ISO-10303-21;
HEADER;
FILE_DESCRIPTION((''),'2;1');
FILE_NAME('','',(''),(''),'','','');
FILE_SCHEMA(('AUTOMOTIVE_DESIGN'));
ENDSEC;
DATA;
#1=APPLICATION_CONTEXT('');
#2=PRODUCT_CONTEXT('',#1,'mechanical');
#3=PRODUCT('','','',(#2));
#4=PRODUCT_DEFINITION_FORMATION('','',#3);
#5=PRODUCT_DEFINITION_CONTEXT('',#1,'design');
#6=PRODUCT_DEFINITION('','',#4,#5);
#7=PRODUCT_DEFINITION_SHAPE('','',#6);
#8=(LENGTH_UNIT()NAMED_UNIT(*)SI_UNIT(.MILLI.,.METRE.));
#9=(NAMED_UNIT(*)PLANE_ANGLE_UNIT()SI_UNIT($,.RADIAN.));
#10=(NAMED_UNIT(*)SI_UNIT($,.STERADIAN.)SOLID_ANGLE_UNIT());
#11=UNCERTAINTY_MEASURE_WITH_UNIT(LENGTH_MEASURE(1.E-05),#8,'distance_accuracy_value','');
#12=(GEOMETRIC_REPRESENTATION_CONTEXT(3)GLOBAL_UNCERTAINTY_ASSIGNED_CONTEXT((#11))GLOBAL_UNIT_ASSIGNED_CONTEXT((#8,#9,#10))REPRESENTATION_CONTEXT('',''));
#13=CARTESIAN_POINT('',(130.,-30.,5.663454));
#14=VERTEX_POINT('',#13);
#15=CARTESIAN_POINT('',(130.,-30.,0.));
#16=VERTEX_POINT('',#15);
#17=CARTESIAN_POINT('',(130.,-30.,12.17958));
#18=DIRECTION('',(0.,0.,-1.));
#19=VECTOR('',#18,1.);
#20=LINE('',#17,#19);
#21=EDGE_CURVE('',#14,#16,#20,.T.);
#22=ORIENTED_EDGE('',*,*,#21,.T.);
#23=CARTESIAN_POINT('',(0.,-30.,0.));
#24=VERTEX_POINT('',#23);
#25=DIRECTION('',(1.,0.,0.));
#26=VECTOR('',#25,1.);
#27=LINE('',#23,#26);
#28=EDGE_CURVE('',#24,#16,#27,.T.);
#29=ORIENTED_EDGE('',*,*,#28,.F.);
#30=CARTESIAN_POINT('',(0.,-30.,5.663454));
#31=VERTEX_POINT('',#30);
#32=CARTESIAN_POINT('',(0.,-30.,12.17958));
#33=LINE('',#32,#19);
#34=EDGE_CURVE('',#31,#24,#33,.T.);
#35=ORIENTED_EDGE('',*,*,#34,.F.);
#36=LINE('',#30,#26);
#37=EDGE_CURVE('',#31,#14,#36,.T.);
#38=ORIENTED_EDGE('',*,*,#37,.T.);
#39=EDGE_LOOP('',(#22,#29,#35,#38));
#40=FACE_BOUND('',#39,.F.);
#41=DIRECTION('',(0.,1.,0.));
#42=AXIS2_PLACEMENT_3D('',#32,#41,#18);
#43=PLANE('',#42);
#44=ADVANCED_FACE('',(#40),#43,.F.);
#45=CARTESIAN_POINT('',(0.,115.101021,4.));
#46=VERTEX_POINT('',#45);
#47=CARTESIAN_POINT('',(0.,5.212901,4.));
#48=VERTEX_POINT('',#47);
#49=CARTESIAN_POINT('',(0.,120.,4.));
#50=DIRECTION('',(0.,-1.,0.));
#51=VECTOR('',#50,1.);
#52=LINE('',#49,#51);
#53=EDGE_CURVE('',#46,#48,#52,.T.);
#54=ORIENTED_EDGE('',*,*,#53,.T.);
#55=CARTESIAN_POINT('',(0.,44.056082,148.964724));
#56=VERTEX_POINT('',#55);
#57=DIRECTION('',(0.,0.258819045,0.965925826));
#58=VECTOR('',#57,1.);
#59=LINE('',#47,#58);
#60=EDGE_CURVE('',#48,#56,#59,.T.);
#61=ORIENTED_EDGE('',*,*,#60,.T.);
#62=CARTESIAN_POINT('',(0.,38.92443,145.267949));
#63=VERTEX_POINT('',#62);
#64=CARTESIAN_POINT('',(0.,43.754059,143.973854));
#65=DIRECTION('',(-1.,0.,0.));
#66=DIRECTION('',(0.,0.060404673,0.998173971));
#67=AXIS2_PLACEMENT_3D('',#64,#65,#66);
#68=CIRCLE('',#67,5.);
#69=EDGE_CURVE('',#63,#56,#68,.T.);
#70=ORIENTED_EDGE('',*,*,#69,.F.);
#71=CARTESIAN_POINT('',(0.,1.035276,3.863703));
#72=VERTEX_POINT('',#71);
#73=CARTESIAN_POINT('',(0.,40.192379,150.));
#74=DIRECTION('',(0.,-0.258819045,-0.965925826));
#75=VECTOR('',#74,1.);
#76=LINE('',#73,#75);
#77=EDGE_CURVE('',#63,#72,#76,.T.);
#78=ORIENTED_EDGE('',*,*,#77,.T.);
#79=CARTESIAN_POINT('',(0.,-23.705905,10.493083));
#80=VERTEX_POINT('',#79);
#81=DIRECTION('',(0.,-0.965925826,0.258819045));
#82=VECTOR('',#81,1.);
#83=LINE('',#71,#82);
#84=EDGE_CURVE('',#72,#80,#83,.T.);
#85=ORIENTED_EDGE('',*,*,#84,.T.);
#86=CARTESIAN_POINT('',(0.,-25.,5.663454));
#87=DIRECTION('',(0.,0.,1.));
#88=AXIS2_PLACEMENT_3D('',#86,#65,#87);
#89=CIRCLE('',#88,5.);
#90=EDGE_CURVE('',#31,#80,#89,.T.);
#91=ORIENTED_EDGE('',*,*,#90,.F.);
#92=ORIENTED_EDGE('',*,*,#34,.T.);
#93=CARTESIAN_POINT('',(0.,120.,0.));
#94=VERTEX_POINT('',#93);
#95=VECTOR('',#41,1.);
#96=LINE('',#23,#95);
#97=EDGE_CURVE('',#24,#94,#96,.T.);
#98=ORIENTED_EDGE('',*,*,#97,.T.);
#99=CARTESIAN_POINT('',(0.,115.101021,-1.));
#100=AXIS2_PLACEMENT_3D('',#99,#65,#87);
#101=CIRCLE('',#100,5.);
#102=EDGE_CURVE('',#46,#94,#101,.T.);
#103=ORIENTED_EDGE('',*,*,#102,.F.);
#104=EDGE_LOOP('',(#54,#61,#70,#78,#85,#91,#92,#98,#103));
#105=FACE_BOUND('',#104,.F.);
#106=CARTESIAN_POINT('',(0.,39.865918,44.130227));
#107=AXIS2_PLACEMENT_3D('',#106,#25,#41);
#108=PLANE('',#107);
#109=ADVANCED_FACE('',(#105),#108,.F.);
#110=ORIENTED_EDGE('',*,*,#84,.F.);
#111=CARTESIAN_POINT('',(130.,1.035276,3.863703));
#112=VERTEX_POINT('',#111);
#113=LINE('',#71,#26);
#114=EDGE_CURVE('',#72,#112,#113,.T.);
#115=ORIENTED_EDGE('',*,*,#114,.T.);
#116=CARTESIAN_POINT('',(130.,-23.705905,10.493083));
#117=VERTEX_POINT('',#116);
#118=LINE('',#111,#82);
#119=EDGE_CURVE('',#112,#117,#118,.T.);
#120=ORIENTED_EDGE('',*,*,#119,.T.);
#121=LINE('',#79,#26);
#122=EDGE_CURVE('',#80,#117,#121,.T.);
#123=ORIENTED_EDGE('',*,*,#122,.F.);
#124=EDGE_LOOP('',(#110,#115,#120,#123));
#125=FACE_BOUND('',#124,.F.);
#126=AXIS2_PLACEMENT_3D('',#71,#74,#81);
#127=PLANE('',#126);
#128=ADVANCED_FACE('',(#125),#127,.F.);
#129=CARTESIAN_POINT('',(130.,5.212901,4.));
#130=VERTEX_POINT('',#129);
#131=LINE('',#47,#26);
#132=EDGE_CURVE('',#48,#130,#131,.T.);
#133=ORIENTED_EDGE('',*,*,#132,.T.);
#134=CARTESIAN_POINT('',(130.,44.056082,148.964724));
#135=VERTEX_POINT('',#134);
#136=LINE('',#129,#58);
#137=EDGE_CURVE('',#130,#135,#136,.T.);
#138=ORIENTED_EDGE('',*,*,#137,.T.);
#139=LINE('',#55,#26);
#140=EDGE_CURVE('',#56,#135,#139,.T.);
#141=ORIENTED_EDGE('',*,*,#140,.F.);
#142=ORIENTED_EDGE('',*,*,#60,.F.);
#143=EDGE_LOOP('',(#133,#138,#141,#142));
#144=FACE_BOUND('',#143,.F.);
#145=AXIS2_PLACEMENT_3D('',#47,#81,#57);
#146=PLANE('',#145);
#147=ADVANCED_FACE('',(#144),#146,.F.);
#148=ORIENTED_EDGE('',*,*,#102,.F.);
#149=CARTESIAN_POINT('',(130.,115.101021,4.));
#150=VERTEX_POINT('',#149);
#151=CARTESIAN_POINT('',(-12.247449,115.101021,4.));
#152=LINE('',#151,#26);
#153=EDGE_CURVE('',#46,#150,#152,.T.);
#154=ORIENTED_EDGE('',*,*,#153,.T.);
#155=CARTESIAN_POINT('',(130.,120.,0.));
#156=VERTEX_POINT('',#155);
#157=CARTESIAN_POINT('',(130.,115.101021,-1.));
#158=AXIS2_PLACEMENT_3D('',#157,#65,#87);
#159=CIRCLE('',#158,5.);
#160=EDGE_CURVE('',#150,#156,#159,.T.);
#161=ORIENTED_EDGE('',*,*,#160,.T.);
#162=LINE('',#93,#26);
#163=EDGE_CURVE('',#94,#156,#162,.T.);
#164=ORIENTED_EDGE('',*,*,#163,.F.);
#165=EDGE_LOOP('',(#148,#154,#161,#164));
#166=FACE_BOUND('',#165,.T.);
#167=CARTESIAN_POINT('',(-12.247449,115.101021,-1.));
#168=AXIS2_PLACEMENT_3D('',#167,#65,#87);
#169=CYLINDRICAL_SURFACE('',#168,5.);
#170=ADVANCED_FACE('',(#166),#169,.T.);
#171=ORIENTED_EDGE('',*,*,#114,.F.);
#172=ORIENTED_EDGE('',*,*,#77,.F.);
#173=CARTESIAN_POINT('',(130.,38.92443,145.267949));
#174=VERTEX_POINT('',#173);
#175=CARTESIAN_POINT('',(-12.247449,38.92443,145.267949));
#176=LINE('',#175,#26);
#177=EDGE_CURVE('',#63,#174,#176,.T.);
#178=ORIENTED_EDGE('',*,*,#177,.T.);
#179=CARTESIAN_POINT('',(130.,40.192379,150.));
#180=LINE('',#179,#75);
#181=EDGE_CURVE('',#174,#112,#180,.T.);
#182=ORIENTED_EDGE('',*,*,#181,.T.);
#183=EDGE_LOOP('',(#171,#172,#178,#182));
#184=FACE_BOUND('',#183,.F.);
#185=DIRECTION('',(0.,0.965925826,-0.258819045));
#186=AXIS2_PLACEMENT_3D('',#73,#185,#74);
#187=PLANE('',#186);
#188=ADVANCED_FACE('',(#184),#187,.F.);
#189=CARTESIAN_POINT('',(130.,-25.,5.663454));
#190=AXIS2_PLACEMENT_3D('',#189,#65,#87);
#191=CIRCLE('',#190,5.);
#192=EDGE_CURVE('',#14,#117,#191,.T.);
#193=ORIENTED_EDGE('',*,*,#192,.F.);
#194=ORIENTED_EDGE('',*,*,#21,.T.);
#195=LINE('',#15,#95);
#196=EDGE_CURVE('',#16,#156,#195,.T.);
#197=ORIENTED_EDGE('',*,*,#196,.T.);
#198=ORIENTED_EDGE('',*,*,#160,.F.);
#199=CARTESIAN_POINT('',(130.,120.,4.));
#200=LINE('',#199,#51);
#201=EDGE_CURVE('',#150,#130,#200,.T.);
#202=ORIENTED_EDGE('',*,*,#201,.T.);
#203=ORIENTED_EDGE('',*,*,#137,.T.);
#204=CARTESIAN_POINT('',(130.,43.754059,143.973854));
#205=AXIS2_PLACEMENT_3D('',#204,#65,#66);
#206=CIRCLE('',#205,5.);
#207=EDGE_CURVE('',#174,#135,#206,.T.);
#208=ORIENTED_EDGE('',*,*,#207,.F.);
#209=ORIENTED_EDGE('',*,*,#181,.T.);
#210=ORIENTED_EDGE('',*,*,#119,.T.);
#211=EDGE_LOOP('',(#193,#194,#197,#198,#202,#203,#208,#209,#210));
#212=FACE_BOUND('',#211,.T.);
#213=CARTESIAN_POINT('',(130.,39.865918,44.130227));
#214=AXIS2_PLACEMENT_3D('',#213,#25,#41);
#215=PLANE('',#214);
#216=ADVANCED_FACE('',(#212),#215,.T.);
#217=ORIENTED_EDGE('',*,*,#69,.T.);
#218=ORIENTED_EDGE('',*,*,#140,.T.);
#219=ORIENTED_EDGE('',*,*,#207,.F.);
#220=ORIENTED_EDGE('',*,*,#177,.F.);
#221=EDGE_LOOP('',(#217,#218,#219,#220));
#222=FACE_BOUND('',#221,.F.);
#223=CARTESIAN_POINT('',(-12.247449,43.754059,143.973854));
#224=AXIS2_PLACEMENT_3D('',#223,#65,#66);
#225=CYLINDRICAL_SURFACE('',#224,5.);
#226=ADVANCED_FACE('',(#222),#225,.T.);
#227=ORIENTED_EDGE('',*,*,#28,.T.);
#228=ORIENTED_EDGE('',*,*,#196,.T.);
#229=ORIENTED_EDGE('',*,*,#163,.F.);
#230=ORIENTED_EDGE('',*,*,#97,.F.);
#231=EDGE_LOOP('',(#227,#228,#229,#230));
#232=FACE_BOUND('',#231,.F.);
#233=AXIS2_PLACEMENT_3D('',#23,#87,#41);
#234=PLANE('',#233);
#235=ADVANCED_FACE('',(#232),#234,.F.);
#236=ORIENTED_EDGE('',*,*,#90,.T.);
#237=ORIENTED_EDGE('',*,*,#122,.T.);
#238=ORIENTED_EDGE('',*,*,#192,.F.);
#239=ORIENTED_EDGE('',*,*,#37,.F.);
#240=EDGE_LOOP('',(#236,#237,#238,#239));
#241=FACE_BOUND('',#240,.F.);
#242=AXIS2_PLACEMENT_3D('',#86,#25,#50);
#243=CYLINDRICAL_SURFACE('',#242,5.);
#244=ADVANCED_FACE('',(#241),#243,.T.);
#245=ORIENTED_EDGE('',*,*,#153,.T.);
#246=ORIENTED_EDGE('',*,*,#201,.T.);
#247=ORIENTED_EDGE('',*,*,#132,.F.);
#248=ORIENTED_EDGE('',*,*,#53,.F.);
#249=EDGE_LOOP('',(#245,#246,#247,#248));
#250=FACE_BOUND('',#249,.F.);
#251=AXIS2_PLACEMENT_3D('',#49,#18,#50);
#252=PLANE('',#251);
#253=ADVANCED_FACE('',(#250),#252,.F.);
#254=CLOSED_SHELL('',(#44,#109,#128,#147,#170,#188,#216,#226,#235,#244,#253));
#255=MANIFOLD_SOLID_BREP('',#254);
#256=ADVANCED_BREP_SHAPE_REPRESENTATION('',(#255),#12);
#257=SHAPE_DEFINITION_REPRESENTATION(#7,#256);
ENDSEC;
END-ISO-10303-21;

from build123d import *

# Parameters (mm, degrees)
F1_DEPTH    = 130
F2_T1_DEPTH = 154.4948974279
F3_T1_DEPTH = 154.4948974279
F4_R        = 5


# Not quite as in the source:
# - a fillet or chamfer that OpenCascade refuses, or shapes differently, is made with other operations: its cross-section is extruded or revolved along the edge and cut away or added


with BuildPart() as f1:
    # F0 (on Right) → F1 (new body)
    with BuildSketch(Plane.YZ):
        Polygon((1.0352761804, 3.8637033052), (0, 0), (120, 0), (120, 4), (5.2129014914, 4), (44.0560821698, 148.9647238196), (40.1923788647, 150), align=None)
        Polygon((-30, 0), (0, 0), (1.0352761804, 3.8637033052), (-30, 12.1795804946), (-30, 4.0079755444), align=None)
    extrude(amount=F1_DEPTH)

    # F2: fillet of radius 5 on 1 edges, made by hand

    # F2_s2 → F2_t1 (cut)
    with BuildSketch(Plane.YZ.offset(-12.2474487139)):
        with BuildLine():
            ThreePointArc((44.0560821698, 148.9647238196), (40.8315018491, 148.0307814801), (38.9244296722, 145.2679491924))
            Line((38.9244296722, 145.2679491924), (40.1923788647, 150))
            Line((40.1923788647, 150), (44.0560821698, 148.9647238196))
        make_face()
    extrude(amount=F2_T1_DEPTH, mode=Mode.SUBTRACT)

    # F3: fillet of radius 5 on 1 edges, made by hand

    # F3_s2 → F3_t1 (cut)
    with BuildSketch(Plane.YZ.offset(-12.2474487139)):
        with BuildLine():
            ThreePointArc((115.1010205144, 4), (118.2632981746, 2.8729833462), (120, 0))
            Line((120, 0), (120, 4))
            Line((120, 4), (115.1010205144, 4))
        make_face()
    extrude(amount=F3_T1_DEPTH, mode=Mode.SUBTRACT)

    # F4
    f4_edges = [f1.edges().sort_by_distance(p)[0] for p in [
        (65, -30, 12.17958),
    ]]
    fillet(f4_edges, radius=F4_R)


solid = f1.part
